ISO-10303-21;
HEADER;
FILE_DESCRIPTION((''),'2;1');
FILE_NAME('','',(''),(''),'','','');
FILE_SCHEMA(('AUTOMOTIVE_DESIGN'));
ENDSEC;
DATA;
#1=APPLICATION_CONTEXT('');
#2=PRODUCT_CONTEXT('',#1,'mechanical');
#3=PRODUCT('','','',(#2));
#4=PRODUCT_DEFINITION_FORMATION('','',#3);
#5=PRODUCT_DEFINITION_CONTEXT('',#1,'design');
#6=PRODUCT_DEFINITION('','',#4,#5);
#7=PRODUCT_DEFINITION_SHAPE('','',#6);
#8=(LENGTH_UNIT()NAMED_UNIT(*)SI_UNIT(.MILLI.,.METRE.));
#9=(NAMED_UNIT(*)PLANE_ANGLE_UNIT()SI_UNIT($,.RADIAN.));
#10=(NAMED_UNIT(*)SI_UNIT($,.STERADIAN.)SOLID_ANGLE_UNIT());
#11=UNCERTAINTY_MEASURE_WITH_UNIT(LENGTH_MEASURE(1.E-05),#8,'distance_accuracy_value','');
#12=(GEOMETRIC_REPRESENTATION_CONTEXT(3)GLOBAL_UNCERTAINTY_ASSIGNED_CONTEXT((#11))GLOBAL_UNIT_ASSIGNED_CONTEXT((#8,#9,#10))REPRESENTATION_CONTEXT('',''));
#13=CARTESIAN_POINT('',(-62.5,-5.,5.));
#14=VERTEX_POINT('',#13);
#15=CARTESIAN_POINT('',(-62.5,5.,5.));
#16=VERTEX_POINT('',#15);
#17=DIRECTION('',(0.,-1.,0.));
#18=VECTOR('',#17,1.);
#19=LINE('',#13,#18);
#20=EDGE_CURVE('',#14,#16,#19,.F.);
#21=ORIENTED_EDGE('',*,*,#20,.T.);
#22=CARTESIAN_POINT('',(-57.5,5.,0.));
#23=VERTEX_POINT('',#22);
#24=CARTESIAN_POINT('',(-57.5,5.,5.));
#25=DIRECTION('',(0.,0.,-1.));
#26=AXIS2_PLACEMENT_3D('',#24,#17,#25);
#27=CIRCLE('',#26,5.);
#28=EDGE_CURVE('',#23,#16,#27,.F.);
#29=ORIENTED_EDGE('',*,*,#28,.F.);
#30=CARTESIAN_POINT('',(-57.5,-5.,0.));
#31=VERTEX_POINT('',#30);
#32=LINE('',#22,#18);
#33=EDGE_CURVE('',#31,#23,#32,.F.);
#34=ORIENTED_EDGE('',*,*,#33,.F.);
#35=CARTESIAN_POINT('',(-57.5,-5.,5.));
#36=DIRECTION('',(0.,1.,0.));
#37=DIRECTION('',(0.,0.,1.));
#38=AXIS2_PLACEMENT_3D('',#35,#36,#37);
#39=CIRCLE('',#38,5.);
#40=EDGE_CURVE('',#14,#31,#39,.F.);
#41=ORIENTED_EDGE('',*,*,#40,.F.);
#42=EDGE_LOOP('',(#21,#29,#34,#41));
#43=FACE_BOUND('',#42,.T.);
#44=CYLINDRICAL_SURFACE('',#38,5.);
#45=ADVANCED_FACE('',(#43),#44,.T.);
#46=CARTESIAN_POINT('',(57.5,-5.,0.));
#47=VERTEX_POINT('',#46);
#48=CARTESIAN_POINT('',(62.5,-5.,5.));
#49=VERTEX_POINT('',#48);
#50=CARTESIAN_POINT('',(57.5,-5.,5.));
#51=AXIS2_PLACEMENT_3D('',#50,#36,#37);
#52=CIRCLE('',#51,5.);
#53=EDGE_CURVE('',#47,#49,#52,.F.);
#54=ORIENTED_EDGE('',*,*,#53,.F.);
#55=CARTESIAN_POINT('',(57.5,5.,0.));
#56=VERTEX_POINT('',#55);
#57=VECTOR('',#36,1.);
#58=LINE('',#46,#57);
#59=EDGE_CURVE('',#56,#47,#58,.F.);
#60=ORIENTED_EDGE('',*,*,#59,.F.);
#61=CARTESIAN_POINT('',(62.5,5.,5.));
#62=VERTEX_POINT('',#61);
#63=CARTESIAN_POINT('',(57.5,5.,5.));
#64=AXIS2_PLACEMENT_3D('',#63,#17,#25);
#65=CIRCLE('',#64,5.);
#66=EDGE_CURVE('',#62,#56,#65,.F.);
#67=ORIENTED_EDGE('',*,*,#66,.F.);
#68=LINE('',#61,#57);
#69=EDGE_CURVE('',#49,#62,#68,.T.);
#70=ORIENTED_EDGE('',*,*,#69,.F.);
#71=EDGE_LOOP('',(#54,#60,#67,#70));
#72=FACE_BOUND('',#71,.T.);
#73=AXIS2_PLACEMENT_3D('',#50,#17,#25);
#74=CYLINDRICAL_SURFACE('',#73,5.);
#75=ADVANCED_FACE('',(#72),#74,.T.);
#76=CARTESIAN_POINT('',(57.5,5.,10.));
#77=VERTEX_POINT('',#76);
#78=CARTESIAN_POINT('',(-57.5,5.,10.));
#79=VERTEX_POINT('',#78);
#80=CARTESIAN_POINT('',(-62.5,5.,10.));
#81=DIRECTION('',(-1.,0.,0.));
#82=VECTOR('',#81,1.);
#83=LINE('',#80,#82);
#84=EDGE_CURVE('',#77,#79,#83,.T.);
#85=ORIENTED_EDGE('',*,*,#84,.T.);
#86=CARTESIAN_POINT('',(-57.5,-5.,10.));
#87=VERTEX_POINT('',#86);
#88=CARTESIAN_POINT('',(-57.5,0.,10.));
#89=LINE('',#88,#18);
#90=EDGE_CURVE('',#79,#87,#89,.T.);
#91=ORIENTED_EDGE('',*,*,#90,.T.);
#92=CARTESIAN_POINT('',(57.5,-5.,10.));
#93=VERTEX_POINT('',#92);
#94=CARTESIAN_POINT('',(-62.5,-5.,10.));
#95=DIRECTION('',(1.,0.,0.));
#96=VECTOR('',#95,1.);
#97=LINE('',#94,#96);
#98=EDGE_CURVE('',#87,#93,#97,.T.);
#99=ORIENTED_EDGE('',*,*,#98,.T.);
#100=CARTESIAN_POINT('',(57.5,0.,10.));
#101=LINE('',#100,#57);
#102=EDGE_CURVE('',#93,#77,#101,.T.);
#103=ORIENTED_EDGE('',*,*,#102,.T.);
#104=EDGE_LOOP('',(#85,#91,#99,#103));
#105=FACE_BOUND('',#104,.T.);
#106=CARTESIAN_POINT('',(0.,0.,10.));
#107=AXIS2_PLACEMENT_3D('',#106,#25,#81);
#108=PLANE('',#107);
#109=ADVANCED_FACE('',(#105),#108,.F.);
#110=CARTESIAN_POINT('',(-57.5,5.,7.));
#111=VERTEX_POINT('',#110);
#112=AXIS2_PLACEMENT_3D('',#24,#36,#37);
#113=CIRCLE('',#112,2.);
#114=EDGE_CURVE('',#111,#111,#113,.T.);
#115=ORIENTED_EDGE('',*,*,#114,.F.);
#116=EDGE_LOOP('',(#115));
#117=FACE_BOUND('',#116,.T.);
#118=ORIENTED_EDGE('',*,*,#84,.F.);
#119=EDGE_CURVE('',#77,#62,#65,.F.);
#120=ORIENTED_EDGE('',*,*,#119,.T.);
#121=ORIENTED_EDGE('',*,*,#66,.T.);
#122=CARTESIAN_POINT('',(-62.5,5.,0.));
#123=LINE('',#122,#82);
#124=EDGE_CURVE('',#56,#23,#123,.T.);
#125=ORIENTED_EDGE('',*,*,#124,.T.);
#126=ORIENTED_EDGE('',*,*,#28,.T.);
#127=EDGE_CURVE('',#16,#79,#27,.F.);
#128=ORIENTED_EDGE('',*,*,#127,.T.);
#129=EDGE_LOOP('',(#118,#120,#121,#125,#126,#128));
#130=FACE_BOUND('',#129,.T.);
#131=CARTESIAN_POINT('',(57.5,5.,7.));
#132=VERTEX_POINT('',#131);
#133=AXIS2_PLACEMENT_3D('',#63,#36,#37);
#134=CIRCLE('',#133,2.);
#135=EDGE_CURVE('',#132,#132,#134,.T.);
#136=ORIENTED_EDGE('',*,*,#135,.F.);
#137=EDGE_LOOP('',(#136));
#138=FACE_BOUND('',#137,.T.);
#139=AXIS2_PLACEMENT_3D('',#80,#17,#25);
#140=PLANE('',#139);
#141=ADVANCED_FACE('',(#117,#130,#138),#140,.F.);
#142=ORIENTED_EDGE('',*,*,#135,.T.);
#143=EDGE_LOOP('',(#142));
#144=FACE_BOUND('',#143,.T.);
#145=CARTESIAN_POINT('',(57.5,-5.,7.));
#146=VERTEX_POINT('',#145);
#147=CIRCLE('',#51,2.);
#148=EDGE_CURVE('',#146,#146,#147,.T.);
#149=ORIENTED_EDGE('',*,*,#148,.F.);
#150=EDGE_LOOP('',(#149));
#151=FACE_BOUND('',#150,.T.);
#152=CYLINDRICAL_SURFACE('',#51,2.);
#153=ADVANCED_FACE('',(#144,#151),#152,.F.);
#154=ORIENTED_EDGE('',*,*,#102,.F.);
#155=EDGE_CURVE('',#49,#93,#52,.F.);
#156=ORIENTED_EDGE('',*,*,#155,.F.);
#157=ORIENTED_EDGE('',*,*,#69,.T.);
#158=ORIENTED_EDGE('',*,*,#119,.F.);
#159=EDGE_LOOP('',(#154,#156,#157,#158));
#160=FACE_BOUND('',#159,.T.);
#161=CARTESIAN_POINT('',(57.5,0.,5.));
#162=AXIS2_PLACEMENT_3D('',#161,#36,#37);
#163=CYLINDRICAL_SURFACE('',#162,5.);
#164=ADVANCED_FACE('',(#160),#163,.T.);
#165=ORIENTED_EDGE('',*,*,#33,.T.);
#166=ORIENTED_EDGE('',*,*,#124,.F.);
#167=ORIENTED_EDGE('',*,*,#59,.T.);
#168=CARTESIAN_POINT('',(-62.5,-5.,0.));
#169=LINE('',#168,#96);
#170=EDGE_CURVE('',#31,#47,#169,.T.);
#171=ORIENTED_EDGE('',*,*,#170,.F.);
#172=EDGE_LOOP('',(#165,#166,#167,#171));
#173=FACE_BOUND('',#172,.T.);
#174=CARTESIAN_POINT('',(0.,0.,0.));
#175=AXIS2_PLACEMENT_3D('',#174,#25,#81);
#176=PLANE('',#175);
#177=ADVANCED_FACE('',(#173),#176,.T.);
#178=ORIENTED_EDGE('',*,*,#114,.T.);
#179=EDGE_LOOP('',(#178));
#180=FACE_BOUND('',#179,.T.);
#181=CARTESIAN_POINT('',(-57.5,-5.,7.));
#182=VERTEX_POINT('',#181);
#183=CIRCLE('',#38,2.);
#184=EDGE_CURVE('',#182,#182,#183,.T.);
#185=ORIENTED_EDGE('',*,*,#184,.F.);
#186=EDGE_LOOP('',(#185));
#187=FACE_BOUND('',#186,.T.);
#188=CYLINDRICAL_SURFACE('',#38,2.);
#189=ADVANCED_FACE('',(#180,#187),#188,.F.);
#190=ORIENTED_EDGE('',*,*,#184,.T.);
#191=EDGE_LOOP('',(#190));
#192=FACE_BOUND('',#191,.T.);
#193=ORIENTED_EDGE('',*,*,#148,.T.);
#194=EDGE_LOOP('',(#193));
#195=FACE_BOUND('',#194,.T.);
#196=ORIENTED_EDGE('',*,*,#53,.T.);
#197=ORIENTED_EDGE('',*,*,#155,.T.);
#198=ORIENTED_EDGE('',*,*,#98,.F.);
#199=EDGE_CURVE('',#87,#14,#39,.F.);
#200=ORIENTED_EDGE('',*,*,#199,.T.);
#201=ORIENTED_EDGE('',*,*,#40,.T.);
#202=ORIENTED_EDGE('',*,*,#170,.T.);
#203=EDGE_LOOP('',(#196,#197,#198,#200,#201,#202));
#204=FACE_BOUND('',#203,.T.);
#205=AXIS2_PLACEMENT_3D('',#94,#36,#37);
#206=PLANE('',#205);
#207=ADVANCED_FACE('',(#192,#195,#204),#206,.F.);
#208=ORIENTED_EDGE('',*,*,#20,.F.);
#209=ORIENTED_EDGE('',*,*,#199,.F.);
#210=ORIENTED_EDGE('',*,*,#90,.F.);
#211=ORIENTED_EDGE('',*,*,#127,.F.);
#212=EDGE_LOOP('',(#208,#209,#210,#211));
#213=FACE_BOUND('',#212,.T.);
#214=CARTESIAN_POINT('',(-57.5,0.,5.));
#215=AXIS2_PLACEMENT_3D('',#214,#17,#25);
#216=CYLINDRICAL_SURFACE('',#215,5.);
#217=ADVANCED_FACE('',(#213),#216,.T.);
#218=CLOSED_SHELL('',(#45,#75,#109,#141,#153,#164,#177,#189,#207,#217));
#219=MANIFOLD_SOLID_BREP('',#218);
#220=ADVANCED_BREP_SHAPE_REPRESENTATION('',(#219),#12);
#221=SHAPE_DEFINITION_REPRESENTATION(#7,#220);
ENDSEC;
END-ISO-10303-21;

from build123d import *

# Parameters (mm, degrees)
SKETCH_1_W          = 125
SKETCH_1_H          = 10
EXTRUDE_1_DEPTH     = 10
FILLET_1_R          = 5
SKETCH_2_R          = 2
CUT_EXTRUDE_1_DEPTH = 10


with BuildPart() as part:
    # 스케치1 → 보스-돌출1 (new body)
    with BuildSketch(Plane.XY):
        Rectangle(SKETCH_1_W, SKETCH_1_H)
    extrude(amount=EXTRUDE_1_DEPTH)

    # 필렛1
    fillet_1_edges = [part.edges().sort_by_distance(p)[0] for p in [
        (62.5, 0, 10),
        (62.5, 0, 0),
        (-62.5, 0, 0),
        (-62.5, 0, 10),
    ]]
    fillet(fillet_1_edges, radius=FILLET_1_R - 0.0001)  # a hair under: the kernel refuses the full size

    # 스케치2 → 컷-돌출1 (cut)
    with BuildSketch(Plane(origin=(0, 5, 0), x_dir=(1, 0, 0), z_dir=(0, 1, 0))):
        with Locations(Location((-57.5, -5, 0), (0, 0, 270))):
            Circle(SKETCH_2_R)
        with Locations(Location((57.5, -5, 0), (0, 0, 270))):
            Circle(SKETCH_2_R)
    extrude(amount=-CUT_EXTRUDE_1_DEPTH, mode=Mode.SUBTRACT)


solid = part.part
